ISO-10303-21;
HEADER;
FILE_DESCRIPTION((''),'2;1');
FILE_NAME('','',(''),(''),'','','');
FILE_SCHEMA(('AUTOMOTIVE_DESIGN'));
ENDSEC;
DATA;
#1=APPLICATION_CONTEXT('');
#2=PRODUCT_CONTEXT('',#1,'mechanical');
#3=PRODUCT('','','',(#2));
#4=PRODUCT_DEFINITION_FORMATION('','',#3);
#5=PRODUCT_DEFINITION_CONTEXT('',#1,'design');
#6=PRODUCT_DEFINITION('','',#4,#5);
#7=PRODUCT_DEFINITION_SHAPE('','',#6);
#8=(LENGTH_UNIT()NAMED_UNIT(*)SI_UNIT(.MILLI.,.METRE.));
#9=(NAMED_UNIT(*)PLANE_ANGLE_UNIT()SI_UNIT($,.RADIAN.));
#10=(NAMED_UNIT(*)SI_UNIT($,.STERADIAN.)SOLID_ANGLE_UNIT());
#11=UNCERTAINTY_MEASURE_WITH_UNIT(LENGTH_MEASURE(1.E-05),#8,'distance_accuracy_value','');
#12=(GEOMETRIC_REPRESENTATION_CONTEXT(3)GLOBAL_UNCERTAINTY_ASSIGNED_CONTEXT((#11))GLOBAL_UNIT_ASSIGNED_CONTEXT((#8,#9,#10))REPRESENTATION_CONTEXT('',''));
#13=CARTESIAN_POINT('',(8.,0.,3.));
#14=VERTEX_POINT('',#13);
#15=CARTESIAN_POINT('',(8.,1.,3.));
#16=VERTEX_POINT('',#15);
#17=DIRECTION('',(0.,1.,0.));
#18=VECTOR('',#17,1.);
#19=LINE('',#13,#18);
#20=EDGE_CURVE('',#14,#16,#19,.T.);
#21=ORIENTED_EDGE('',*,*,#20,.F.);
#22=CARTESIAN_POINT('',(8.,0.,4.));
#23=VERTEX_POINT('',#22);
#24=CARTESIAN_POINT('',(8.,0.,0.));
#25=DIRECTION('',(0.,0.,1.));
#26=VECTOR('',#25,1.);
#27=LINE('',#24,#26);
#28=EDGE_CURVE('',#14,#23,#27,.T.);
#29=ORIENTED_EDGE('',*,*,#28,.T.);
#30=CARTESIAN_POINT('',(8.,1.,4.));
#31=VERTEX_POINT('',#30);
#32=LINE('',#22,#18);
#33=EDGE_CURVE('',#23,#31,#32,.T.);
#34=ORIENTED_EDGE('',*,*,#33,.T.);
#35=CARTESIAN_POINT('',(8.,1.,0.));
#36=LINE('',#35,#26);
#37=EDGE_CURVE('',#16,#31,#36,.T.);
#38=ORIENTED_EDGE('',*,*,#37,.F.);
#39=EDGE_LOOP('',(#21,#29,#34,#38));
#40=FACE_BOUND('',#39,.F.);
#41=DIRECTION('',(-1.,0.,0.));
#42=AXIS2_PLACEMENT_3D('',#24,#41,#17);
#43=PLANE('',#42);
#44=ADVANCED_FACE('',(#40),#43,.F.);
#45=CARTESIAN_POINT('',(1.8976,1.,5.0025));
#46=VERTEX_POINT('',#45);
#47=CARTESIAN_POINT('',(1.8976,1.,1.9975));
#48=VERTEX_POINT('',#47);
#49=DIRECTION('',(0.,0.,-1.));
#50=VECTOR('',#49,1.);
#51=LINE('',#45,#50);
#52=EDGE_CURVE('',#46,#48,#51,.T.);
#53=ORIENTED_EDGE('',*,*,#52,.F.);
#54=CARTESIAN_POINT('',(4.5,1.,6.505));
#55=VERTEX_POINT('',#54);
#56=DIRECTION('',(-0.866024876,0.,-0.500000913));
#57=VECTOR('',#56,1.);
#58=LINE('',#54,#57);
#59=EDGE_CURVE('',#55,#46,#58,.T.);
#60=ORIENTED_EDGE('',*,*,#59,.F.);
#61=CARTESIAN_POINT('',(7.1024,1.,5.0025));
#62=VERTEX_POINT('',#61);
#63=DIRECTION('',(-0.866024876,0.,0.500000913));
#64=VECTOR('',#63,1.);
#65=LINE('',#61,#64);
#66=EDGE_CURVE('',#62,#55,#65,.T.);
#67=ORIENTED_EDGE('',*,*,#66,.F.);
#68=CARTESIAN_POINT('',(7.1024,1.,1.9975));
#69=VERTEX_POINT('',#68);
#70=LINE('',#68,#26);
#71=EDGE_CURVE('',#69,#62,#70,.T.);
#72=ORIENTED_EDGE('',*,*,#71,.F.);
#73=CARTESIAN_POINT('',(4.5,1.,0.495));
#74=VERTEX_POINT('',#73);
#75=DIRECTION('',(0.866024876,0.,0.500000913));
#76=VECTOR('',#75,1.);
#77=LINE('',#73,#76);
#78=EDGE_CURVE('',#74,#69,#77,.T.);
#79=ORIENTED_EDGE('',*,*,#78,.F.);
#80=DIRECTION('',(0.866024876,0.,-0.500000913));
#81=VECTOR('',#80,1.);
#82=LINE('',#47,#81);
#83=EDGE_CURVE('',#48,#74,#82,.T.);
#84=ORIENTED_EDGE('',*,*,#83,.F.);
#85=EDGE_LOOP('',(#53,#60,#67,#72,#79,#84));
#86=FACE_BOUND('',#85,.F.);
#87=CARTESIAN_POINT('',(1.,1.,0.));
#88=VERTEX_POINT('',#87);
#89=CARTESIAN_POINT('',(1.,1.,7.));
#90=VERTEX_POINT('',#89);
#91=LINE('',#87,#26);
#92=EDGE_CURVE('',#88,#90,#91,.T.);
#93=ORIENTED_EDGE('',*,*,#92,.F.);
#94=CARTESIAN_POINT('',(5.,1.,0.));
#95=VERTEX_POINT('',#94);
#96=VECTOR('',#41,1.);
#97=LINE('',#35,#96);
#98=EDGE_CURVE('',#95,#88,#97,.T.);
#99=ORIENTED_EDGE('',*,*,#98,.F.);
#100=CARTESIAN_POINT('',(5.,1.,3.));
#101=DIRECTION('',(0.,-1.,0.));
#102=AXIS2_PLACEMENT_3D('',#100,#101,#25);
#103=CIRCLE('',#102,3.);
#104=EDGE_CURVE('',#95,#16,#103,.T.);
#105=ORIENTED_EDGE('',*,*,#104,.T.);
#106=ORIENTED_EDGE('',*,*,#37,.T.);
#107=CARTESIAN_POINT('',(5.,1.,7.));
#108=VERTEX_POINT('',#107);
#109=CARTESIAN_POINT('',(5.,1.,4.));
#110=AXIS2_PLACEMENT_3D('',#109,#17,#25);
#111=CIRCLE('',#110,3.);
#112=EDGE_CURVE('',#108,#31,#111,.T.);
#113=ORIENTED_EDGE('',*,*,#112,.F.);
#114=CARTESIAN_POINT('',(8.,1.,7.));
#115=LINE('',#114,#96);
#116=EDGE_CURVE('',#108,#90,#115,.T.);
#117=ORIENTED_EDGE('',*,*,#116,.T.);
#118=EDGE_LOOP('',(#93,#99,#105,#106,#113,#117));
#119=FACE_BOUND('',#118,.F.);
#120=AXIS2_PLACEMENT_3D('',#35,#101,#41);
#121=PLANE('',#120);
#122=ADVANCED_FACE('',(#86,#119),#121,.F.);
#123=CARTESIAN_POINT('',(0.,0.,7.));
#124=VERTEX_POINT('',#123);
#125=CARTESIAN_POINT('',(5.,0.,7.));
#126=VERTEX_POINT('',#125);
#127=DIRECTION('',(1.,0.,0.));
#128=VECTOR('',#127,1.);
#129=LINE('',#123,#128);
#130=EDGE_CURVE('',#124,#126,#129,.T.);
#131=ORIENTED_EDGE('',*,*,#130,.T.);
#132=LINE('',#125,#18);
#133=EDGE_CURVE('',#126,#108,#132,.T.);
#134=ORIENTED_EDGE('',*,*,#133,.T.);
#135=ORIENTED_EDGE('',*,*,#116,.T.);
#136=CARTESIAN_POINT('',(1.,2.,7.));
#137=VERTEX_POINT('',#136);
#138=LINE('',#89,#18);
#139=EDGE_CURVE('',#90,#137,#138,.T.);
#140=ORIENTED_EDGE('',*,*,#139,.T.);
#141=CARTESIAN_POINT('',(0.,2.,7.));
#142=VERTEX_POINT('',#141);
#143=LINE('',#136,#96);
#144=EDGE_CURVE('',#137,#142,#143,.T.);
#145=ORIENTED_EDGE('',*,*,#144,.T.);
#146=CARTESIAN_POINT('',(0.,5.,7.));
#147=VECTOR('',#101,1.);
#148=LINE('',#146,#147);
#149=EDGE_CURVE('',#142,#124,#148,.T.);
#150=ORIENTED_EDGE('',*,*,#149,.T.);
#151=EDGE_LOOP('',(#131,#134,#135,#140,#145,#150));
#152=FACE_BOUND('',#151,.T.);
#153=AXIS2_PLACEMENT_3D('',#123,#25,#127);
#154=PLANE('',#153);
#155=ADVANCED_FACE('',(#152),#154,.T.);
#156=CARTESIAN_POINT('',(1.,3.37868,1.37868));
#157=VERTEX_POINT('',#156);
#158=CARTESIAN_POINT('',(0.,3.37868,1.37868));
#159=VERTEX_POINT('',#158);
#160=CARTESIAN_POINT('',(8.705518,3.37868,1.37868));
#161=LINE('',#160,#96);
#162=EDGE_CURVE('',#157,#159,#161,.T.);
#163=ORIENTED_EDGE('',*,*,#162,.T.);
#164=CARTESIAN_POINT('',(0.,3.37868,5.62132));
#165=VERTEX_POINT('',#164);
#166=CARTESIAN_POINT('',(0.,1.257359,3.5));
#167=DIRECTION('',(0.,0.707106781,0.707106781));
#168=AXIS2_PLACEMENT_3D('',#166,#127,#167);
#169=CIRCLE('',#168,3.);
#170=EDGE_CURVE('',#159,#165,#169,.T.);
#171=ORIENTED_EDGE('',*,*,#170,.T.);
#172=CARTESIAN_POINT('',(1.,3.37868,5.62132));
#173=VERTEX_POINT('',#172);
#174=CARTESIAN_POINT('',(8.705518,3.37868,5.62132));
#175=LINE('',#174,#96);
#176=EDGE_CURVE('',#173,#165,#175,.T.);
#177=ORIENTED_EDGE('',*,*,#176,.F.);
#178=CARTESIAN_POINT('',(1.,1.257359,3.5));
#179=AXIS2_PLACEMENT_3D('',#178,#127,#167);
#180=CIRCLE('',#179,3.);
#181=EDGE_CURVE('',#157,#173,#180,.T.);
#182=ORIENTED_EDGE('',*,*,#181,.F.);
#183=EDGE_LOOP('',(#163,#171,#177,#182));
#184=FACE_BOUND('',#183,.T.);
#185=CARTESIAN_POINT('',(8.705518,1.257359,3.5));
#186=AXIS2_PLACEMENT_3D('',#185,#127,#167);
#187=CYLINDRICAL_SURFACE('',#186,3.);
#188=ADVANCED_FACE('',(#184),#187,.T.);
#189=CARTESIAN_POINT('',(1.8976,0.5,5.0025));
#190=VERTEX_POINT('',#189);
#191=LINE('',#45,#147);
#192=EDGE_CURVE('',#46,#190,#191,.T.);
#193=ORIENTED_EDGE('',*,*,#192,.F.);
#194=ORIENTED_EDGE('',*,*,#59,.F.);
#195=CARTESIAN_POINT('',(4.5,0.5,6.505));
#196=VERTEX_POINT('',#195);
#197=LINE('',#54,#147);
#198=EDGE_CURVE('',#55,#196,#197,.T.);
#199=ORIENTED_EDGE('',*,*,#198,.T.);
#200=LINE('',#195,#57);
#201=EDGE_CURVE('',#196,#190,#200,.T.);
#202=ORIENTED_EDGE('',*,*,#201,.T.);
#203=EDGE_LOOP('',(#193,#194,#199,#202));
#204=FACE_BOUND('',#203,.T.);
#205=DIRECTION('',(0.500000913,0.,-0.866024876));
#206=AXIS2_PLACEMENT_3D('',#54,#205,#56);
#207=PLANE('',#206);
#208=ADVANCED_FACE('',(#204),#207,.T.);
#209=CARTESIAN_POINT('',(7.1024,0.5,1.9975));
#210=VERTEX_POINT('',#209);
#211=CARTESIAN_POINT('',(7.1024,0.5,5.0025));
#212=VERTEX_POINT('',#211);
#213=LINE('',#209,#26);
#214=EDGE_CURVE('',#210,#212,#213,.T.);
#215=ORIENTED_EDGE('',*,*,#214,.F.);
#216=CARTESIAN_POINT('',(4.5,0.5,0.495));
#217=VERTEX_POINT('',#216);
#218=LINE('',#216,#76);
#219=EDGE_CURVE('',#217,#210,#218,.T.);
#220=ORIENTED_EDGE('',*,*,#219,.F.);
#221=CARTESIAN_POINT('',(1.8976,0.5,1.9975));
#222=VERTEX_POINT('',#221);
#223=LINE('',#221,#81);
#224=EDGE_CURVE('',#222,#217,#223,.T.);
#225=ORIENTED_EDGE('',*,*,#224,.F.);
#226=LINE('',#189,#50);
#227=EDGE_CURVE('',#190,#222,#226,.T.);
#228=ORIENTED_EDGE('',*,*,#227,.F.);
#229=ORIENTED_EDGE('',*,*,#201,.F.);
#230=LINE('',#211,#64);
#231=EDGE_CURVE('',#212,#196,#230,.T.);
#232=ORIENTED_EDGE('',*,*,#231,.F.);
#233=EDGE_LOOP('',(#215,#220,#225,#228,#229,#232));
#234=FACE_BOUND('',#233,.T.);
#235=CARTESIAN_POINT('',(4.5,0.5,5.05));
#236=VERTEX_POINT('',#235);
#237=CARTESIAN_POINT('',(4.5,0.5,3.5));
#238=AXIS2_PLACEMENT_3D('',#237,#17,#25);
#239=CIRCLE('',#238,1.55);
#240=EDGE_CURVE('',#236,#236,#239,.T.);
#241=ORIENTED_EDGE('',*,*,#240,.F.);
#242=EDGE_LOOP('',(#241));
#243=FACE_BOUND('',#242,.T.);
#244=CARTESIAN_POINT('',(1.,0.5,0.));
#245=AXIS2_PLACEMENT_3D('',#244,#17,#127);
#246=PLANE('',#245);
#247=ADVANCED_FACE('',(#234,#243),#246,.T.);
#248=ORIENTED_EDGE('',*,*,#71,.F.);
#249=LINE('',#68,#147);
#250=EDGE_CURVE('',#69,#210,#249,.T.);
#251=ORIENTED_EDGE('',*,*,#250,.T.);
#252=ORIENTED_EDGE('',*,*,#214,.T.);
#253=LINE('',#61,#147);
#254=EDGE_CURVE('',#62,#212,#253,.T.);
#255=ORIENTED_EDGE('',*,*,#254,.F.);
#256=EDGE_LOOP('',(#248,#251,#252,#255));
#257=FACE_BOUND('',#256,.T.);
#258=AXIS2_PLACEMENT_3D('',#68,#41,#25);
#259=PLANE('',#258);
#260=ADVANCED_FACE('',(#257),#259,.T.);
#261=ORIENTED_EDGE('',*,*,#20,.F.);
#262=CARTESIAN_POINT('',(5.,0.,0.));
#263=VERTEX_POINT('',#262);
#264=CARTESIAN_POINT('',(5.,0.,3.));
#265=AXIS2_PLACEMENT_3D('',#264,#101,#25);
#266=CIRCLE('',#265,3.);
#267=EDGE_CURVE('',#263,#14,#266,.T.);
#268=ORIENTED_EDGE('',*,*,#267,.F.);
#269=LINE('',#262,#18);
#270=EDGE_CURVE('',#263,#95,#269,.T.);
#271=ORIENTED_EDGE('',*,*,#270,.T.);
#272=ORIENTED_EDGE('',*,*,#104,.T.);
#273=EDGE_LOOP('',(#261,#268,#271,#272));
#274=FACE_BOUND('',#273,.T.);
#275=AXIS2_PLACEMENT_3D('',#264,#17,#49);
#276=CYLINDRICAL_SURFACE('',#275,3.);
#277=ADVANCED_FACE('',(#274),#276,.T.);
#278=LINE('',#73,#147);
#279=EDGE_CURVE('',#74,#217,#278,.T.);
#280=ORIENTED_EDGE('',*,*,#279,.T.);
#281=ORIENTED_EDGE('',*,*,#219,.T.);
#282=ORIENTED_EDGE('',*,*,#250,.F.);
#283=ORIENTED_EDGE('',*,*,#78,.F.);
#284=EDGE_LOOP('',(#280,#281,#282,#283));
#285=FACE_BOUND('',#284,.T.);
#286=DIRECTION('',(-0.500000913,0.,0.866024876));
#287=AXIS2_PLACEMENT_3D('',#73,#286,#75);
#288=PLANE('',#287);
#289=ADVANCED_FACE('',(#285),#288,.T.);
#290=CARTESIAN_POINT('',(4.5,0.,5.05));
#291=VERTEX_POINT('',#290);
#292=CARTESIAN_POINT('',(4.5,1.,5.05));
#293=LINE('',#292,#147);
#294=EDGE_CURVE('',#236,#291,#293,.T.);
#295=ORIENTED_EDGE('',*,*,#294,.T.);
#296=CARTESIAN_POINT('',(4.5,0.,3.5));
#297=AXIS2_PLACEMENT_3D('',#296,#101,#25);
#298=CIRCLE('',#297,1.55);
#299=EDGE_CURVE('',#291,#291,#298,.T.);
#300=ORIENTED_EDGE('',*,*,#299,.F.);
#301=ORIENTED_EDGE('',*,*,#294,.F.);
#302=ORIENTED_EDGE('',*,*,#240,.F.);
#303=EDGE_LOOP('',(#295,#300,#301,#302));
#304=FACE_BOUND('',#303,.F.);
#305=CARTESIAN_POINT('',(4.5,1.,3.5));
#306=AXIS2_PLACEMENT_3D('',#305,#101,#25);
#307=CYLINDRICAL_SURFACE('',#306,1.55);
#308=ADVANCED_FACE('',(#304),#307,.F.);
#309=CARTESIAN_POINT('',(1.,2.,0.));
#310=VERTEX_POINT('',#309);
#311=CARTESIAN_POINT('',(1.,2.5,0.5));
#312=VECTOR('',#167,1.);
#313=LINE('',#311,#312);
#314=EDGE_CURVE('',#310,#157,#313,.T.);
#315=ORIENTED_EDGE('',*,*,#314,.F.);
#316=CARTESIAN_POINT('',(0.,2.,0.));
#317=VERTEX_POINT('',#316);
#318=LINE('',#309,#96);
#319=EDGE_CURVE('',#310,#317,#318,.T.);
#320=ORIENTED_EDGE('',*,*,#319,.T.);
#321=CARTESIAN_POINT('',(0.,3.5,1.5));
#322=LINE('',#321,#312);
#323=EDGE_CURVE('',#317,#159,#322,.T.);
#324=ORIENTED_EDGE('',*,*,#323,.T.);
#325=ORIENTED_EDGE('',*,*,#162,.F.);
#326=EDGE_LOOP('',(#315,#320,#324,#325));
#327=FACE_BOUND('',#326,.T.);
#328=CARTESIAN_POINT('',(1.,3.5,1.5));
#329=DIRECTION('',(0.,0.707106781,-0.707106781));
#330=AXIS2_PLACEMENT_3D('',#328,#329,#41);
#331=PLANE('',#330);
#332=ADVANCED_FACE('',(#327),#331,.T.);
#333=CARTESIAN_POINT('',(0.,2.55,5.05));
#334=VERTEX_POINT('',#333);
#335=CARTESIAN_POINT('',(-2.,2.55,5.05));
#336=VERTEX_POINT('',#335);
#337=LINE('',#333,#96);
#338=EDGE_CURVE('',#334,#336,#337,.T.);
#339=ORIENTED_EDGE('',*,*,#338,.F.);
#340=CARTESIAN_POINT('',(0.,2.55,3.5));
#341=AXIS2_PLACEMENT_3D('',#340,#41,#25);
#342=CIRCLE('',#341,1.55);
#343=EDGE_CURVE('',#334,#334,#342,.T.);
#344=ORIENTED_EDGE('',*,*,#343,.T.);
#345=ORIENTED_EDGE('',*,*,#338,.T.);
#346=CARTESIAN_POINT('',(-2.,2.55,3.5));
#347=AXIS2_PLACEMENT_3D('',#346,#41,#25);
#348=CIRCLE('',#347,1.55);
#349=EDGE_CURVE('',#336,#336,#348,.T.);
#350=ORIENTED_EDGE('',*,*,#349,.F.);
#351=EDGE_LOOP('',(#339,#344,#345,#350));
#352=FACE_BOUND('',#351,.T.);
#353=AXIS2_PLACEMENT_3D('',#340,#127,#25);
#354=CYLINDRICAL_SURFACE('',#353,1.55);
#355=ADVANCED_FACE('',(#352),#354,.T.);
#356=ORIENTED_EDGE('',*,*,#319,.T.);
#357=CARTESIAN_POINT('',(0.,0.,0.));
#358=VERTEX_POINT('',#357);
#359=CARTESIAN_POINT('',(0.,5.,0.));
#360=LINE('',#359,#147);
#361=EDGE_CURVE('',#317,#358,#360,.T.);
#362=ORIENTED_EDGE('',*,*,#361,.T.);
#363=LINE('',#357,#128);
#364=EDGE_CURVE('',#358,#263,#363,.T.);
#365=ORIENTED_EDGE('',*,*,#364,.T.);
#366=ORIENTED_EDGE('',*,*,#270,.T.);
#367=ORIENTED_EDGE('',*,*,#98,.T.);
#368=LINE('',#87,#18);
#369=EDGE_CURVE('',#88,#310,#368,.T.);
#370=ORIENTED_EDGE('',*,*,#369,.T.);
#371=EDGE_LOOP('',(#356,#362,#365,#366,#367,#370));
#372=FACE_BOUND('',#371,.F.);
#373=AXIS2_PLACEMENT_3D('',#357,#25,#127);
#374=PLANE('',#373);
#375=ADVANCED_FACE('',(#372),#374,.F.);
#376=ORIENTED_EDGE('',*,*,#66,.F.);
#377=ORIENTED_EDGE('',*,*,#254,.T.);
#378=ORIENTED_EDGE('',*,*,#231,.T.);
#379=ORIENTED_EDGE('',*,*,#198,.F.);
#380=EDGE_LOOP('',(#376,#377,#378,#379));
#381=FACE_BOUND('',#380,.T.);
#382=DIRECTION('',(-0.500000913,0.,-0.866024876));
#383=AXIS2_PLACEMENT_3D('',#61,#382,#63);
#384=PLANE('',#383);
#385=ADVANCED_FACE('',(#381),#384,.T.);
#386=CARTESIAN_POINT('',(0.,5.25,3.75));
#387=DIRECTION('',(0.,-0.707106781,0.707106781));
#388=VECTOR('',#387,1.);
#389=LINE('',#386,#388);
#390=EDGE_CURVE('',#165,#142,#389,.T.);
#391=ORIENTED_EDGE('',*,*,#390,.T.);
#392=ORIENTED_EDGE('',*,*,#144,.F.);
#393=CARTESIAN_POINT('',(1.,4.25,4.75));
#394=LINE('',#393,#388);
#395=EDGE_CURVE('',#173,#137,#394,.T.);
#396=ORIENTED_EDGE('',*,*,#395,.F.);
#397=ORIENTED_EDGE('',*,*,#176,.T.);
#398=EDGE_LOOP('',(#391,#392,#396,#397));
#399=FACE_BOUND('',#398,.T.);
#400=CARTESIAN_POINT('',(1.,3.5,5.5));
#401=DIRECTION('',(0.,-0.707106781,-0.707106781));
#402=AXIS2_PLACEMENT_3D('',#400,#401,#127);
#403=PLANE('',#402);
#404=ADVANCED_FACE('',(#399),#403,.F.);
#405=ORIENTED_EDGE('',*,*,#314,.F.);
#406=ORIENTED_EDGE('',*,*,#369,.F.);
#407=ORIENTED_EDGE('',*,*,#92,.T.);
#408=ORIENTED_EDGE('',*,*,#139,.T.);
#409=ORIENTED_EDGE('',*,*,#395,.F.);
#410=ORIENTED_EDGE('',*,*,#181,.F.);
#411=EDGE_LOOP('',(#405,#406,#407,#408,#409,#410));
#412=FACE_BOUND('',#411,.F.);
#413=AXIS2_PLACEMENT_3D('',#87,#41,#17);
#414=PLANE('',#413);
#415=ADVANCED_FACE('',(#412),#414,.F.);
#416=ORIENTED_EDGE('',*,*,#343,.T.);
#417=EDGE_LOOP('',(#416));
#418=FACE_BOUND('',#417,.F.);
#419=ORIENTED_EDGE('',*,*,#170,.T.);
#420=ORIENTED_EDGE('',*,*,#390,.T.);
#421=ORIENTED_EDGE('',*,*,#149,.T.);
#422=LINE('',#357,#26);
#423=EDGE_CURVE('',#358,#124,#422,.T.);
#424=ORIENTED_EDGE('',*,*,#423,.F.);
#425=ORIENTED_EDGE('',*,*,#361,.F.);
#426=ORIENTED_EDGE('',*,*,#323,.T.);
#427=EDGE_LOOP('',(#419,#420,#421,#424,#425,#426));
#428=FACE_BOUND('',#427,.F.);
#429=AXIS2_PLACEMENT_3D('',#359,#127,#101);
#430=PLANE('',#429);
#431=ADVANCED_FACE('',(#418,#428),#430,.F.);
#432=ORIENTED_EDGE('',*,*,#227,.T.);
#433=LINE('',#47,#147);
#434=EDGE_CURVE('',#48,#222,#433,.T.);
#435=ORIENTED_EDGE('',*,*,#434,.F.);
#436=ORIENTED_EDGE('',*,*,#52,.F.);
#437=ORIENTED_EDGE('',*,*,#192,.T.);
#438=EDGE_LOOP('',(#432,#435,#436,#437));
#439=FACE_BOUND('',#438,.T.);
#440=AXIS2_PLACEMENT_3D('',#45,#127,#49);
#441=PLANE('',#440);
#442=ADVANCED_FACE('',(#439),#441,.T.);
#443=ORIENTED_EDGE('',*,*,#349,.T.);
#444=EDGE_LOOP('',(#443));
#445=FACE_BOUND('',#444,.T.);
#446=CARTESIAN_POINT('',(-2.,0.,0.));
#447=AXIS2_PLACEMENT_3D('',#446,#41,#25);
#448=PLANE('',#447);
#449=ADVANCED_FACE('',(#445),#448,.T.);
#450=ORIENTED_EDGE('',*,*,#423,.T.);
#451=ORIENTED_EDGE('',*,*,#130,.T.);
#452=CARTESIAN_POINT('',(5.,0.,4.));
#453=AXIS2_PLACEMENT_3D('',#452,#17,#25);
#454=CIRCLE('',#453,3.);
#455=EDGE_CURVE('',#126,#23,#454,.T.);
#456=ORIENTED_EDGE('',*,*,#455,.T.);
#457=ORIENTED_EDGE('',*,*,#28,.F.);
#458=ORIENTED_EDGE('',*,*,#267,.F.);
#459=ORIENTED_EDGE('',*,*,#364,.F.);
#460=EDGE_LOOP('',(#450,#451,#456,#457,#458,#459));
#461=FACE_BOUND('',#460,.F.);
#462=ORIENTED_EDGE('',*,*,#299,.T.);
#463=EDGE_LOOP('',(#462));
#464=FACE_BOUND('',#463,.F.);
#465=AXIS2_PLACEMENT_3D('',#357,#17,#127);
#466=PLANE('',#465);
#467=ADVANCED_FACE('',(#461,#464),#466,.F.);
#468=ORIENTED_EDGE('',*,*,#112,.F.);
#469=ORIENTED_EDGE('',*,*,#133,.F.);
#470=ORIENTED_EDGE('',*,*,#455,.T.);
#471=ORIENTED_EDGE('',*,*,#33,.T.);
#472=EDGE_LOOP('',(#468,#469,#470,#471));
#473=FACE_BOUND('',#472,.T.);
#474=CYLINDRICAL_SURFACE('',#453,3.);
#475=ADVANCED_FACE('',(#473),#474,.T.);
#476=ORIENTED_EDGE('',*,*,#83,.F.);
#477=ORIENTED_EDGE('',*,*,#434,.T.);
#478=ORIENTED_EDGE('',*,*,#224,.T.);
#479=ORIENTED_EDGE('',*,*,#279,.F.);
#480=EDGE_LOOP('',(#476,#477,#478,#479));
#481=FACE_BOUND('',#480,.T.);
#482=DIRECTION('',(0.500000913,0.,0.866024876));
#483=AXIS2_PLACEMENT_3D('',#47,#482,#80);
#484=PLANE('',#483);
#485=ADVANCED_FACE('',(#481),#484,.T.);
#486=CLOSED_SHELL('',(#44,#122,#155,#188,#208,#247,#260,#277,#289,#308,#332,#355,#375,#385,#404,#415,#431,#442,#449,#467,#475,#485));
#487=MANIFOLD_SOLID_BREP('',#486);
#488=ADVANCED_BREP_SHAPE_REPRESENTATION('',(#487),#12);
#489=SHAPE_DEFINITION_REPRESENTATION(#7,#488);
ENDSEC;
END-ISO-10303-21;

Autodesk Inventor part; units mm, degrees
ref_plane "YZ Plane" through (0, 0, 0) normal (1, 0, 0) x (0, 1, 0)
ref_plane "XZ Plane" through (0, 0, 0) normal (0, 1, 0) x (-1, 0, 0)
ref_plane "XY Plane" through (0, 0, 0) normal (0, 0, 1) x (1, 0, 0)
sketch "Sketch1" plane through (0, 0, 0) normal (0, 0, 1) x (1, 0, 0)
  line L0 (0, 0) -> (8, 0)
  line L1 (8, 0) -> (8, 1)
  line L2 (8, 1) -> (1, 1)
  line L3 (1, 1) -> (1, 5)
  line L4 (1, 5) -> (0, 5)
  line L5 (0, 5) -> (0, 0)
  dimension "d0" = 8
  dimension "d1" = 5
  dimension "d2" = 1
  dimension "d8" = 1
extrude "Extrusion1" add sketch "Sketch1" along normal blind 7
sketch "Sketch2" plane through (0, 0, 0) normal (-1, 0, 0) x (0, 0, 1)
  circle A0 centre (3.5, 2.55) radius 1.55
  line L0 (0, 0) -> (7, 0) projected
  line L1 (7, 5) -> (7, 0) projected
  dimension "d5" = 3.1
  dimension "d6" = 2.55
  dimension "d7" = 3.5
extrude "Extrusion2" add sketch "Sketch2" along normal blind 2
sketch "Sketch3" plane through (1, 1, 0) normal (0, 1, 0) x (1, 0, 0)
  line L0 (7, 0) -> (7, -7) projected
  line L1 (7, -7) -> (0, -7) projected
  point P0 (-1, 0)
  point P1 (3.5, -3.5)
  point P2 (3.5, -7)
  dimension "d11" = 3.5
  dimension "d12" = 3.5
hole "Hole1" at (4.5, 1, 3.5) direction (0, -1, 0) diameter 3.1 end through all
sketch "Sketch4" plane through (1, 1, 0) normal (0, 1, 0) x (1, 0, 0)
  line L0 (3.5, -0.495) -> (6.1024, -1.9975)
  line L1 (6.1024, -1.9975) -> (6.1024, -5.0025)
  line L2 (6.1024, -5.0025) -> (3.5, -6.505)
  line L3 (3.5, -6.505) -> (0.8976, -5.0025)
  line L4 (0.8976, -5.0025) -> (0.8976, -1.9975)
  line L5 (0.8976, -1.9975) -> (3.5, -0.495)
  circle A0 centre (3.5, -3.5) radius 1.55 projected
  point P0 (-1, 0)
  dimension "d20" = 6.01
fillet "Fillet1" radius 3 2 edges at (8, 0.5, 0) (8, 0.5, 7)
extrude "Extrusion3" cut sketch "Sketch4" against normal blind 0.5
chamfer "Chamfer1" distance 3 angle 45 2 edges at (0.5, 5, 7) (0.5, 5, 0)
fillet "Fillet2" radius 3 2 edges at (0.5, 5, 4) (0.5, 5, 3)
properties part number "mocowanie_tofa_CPY_CPY"
